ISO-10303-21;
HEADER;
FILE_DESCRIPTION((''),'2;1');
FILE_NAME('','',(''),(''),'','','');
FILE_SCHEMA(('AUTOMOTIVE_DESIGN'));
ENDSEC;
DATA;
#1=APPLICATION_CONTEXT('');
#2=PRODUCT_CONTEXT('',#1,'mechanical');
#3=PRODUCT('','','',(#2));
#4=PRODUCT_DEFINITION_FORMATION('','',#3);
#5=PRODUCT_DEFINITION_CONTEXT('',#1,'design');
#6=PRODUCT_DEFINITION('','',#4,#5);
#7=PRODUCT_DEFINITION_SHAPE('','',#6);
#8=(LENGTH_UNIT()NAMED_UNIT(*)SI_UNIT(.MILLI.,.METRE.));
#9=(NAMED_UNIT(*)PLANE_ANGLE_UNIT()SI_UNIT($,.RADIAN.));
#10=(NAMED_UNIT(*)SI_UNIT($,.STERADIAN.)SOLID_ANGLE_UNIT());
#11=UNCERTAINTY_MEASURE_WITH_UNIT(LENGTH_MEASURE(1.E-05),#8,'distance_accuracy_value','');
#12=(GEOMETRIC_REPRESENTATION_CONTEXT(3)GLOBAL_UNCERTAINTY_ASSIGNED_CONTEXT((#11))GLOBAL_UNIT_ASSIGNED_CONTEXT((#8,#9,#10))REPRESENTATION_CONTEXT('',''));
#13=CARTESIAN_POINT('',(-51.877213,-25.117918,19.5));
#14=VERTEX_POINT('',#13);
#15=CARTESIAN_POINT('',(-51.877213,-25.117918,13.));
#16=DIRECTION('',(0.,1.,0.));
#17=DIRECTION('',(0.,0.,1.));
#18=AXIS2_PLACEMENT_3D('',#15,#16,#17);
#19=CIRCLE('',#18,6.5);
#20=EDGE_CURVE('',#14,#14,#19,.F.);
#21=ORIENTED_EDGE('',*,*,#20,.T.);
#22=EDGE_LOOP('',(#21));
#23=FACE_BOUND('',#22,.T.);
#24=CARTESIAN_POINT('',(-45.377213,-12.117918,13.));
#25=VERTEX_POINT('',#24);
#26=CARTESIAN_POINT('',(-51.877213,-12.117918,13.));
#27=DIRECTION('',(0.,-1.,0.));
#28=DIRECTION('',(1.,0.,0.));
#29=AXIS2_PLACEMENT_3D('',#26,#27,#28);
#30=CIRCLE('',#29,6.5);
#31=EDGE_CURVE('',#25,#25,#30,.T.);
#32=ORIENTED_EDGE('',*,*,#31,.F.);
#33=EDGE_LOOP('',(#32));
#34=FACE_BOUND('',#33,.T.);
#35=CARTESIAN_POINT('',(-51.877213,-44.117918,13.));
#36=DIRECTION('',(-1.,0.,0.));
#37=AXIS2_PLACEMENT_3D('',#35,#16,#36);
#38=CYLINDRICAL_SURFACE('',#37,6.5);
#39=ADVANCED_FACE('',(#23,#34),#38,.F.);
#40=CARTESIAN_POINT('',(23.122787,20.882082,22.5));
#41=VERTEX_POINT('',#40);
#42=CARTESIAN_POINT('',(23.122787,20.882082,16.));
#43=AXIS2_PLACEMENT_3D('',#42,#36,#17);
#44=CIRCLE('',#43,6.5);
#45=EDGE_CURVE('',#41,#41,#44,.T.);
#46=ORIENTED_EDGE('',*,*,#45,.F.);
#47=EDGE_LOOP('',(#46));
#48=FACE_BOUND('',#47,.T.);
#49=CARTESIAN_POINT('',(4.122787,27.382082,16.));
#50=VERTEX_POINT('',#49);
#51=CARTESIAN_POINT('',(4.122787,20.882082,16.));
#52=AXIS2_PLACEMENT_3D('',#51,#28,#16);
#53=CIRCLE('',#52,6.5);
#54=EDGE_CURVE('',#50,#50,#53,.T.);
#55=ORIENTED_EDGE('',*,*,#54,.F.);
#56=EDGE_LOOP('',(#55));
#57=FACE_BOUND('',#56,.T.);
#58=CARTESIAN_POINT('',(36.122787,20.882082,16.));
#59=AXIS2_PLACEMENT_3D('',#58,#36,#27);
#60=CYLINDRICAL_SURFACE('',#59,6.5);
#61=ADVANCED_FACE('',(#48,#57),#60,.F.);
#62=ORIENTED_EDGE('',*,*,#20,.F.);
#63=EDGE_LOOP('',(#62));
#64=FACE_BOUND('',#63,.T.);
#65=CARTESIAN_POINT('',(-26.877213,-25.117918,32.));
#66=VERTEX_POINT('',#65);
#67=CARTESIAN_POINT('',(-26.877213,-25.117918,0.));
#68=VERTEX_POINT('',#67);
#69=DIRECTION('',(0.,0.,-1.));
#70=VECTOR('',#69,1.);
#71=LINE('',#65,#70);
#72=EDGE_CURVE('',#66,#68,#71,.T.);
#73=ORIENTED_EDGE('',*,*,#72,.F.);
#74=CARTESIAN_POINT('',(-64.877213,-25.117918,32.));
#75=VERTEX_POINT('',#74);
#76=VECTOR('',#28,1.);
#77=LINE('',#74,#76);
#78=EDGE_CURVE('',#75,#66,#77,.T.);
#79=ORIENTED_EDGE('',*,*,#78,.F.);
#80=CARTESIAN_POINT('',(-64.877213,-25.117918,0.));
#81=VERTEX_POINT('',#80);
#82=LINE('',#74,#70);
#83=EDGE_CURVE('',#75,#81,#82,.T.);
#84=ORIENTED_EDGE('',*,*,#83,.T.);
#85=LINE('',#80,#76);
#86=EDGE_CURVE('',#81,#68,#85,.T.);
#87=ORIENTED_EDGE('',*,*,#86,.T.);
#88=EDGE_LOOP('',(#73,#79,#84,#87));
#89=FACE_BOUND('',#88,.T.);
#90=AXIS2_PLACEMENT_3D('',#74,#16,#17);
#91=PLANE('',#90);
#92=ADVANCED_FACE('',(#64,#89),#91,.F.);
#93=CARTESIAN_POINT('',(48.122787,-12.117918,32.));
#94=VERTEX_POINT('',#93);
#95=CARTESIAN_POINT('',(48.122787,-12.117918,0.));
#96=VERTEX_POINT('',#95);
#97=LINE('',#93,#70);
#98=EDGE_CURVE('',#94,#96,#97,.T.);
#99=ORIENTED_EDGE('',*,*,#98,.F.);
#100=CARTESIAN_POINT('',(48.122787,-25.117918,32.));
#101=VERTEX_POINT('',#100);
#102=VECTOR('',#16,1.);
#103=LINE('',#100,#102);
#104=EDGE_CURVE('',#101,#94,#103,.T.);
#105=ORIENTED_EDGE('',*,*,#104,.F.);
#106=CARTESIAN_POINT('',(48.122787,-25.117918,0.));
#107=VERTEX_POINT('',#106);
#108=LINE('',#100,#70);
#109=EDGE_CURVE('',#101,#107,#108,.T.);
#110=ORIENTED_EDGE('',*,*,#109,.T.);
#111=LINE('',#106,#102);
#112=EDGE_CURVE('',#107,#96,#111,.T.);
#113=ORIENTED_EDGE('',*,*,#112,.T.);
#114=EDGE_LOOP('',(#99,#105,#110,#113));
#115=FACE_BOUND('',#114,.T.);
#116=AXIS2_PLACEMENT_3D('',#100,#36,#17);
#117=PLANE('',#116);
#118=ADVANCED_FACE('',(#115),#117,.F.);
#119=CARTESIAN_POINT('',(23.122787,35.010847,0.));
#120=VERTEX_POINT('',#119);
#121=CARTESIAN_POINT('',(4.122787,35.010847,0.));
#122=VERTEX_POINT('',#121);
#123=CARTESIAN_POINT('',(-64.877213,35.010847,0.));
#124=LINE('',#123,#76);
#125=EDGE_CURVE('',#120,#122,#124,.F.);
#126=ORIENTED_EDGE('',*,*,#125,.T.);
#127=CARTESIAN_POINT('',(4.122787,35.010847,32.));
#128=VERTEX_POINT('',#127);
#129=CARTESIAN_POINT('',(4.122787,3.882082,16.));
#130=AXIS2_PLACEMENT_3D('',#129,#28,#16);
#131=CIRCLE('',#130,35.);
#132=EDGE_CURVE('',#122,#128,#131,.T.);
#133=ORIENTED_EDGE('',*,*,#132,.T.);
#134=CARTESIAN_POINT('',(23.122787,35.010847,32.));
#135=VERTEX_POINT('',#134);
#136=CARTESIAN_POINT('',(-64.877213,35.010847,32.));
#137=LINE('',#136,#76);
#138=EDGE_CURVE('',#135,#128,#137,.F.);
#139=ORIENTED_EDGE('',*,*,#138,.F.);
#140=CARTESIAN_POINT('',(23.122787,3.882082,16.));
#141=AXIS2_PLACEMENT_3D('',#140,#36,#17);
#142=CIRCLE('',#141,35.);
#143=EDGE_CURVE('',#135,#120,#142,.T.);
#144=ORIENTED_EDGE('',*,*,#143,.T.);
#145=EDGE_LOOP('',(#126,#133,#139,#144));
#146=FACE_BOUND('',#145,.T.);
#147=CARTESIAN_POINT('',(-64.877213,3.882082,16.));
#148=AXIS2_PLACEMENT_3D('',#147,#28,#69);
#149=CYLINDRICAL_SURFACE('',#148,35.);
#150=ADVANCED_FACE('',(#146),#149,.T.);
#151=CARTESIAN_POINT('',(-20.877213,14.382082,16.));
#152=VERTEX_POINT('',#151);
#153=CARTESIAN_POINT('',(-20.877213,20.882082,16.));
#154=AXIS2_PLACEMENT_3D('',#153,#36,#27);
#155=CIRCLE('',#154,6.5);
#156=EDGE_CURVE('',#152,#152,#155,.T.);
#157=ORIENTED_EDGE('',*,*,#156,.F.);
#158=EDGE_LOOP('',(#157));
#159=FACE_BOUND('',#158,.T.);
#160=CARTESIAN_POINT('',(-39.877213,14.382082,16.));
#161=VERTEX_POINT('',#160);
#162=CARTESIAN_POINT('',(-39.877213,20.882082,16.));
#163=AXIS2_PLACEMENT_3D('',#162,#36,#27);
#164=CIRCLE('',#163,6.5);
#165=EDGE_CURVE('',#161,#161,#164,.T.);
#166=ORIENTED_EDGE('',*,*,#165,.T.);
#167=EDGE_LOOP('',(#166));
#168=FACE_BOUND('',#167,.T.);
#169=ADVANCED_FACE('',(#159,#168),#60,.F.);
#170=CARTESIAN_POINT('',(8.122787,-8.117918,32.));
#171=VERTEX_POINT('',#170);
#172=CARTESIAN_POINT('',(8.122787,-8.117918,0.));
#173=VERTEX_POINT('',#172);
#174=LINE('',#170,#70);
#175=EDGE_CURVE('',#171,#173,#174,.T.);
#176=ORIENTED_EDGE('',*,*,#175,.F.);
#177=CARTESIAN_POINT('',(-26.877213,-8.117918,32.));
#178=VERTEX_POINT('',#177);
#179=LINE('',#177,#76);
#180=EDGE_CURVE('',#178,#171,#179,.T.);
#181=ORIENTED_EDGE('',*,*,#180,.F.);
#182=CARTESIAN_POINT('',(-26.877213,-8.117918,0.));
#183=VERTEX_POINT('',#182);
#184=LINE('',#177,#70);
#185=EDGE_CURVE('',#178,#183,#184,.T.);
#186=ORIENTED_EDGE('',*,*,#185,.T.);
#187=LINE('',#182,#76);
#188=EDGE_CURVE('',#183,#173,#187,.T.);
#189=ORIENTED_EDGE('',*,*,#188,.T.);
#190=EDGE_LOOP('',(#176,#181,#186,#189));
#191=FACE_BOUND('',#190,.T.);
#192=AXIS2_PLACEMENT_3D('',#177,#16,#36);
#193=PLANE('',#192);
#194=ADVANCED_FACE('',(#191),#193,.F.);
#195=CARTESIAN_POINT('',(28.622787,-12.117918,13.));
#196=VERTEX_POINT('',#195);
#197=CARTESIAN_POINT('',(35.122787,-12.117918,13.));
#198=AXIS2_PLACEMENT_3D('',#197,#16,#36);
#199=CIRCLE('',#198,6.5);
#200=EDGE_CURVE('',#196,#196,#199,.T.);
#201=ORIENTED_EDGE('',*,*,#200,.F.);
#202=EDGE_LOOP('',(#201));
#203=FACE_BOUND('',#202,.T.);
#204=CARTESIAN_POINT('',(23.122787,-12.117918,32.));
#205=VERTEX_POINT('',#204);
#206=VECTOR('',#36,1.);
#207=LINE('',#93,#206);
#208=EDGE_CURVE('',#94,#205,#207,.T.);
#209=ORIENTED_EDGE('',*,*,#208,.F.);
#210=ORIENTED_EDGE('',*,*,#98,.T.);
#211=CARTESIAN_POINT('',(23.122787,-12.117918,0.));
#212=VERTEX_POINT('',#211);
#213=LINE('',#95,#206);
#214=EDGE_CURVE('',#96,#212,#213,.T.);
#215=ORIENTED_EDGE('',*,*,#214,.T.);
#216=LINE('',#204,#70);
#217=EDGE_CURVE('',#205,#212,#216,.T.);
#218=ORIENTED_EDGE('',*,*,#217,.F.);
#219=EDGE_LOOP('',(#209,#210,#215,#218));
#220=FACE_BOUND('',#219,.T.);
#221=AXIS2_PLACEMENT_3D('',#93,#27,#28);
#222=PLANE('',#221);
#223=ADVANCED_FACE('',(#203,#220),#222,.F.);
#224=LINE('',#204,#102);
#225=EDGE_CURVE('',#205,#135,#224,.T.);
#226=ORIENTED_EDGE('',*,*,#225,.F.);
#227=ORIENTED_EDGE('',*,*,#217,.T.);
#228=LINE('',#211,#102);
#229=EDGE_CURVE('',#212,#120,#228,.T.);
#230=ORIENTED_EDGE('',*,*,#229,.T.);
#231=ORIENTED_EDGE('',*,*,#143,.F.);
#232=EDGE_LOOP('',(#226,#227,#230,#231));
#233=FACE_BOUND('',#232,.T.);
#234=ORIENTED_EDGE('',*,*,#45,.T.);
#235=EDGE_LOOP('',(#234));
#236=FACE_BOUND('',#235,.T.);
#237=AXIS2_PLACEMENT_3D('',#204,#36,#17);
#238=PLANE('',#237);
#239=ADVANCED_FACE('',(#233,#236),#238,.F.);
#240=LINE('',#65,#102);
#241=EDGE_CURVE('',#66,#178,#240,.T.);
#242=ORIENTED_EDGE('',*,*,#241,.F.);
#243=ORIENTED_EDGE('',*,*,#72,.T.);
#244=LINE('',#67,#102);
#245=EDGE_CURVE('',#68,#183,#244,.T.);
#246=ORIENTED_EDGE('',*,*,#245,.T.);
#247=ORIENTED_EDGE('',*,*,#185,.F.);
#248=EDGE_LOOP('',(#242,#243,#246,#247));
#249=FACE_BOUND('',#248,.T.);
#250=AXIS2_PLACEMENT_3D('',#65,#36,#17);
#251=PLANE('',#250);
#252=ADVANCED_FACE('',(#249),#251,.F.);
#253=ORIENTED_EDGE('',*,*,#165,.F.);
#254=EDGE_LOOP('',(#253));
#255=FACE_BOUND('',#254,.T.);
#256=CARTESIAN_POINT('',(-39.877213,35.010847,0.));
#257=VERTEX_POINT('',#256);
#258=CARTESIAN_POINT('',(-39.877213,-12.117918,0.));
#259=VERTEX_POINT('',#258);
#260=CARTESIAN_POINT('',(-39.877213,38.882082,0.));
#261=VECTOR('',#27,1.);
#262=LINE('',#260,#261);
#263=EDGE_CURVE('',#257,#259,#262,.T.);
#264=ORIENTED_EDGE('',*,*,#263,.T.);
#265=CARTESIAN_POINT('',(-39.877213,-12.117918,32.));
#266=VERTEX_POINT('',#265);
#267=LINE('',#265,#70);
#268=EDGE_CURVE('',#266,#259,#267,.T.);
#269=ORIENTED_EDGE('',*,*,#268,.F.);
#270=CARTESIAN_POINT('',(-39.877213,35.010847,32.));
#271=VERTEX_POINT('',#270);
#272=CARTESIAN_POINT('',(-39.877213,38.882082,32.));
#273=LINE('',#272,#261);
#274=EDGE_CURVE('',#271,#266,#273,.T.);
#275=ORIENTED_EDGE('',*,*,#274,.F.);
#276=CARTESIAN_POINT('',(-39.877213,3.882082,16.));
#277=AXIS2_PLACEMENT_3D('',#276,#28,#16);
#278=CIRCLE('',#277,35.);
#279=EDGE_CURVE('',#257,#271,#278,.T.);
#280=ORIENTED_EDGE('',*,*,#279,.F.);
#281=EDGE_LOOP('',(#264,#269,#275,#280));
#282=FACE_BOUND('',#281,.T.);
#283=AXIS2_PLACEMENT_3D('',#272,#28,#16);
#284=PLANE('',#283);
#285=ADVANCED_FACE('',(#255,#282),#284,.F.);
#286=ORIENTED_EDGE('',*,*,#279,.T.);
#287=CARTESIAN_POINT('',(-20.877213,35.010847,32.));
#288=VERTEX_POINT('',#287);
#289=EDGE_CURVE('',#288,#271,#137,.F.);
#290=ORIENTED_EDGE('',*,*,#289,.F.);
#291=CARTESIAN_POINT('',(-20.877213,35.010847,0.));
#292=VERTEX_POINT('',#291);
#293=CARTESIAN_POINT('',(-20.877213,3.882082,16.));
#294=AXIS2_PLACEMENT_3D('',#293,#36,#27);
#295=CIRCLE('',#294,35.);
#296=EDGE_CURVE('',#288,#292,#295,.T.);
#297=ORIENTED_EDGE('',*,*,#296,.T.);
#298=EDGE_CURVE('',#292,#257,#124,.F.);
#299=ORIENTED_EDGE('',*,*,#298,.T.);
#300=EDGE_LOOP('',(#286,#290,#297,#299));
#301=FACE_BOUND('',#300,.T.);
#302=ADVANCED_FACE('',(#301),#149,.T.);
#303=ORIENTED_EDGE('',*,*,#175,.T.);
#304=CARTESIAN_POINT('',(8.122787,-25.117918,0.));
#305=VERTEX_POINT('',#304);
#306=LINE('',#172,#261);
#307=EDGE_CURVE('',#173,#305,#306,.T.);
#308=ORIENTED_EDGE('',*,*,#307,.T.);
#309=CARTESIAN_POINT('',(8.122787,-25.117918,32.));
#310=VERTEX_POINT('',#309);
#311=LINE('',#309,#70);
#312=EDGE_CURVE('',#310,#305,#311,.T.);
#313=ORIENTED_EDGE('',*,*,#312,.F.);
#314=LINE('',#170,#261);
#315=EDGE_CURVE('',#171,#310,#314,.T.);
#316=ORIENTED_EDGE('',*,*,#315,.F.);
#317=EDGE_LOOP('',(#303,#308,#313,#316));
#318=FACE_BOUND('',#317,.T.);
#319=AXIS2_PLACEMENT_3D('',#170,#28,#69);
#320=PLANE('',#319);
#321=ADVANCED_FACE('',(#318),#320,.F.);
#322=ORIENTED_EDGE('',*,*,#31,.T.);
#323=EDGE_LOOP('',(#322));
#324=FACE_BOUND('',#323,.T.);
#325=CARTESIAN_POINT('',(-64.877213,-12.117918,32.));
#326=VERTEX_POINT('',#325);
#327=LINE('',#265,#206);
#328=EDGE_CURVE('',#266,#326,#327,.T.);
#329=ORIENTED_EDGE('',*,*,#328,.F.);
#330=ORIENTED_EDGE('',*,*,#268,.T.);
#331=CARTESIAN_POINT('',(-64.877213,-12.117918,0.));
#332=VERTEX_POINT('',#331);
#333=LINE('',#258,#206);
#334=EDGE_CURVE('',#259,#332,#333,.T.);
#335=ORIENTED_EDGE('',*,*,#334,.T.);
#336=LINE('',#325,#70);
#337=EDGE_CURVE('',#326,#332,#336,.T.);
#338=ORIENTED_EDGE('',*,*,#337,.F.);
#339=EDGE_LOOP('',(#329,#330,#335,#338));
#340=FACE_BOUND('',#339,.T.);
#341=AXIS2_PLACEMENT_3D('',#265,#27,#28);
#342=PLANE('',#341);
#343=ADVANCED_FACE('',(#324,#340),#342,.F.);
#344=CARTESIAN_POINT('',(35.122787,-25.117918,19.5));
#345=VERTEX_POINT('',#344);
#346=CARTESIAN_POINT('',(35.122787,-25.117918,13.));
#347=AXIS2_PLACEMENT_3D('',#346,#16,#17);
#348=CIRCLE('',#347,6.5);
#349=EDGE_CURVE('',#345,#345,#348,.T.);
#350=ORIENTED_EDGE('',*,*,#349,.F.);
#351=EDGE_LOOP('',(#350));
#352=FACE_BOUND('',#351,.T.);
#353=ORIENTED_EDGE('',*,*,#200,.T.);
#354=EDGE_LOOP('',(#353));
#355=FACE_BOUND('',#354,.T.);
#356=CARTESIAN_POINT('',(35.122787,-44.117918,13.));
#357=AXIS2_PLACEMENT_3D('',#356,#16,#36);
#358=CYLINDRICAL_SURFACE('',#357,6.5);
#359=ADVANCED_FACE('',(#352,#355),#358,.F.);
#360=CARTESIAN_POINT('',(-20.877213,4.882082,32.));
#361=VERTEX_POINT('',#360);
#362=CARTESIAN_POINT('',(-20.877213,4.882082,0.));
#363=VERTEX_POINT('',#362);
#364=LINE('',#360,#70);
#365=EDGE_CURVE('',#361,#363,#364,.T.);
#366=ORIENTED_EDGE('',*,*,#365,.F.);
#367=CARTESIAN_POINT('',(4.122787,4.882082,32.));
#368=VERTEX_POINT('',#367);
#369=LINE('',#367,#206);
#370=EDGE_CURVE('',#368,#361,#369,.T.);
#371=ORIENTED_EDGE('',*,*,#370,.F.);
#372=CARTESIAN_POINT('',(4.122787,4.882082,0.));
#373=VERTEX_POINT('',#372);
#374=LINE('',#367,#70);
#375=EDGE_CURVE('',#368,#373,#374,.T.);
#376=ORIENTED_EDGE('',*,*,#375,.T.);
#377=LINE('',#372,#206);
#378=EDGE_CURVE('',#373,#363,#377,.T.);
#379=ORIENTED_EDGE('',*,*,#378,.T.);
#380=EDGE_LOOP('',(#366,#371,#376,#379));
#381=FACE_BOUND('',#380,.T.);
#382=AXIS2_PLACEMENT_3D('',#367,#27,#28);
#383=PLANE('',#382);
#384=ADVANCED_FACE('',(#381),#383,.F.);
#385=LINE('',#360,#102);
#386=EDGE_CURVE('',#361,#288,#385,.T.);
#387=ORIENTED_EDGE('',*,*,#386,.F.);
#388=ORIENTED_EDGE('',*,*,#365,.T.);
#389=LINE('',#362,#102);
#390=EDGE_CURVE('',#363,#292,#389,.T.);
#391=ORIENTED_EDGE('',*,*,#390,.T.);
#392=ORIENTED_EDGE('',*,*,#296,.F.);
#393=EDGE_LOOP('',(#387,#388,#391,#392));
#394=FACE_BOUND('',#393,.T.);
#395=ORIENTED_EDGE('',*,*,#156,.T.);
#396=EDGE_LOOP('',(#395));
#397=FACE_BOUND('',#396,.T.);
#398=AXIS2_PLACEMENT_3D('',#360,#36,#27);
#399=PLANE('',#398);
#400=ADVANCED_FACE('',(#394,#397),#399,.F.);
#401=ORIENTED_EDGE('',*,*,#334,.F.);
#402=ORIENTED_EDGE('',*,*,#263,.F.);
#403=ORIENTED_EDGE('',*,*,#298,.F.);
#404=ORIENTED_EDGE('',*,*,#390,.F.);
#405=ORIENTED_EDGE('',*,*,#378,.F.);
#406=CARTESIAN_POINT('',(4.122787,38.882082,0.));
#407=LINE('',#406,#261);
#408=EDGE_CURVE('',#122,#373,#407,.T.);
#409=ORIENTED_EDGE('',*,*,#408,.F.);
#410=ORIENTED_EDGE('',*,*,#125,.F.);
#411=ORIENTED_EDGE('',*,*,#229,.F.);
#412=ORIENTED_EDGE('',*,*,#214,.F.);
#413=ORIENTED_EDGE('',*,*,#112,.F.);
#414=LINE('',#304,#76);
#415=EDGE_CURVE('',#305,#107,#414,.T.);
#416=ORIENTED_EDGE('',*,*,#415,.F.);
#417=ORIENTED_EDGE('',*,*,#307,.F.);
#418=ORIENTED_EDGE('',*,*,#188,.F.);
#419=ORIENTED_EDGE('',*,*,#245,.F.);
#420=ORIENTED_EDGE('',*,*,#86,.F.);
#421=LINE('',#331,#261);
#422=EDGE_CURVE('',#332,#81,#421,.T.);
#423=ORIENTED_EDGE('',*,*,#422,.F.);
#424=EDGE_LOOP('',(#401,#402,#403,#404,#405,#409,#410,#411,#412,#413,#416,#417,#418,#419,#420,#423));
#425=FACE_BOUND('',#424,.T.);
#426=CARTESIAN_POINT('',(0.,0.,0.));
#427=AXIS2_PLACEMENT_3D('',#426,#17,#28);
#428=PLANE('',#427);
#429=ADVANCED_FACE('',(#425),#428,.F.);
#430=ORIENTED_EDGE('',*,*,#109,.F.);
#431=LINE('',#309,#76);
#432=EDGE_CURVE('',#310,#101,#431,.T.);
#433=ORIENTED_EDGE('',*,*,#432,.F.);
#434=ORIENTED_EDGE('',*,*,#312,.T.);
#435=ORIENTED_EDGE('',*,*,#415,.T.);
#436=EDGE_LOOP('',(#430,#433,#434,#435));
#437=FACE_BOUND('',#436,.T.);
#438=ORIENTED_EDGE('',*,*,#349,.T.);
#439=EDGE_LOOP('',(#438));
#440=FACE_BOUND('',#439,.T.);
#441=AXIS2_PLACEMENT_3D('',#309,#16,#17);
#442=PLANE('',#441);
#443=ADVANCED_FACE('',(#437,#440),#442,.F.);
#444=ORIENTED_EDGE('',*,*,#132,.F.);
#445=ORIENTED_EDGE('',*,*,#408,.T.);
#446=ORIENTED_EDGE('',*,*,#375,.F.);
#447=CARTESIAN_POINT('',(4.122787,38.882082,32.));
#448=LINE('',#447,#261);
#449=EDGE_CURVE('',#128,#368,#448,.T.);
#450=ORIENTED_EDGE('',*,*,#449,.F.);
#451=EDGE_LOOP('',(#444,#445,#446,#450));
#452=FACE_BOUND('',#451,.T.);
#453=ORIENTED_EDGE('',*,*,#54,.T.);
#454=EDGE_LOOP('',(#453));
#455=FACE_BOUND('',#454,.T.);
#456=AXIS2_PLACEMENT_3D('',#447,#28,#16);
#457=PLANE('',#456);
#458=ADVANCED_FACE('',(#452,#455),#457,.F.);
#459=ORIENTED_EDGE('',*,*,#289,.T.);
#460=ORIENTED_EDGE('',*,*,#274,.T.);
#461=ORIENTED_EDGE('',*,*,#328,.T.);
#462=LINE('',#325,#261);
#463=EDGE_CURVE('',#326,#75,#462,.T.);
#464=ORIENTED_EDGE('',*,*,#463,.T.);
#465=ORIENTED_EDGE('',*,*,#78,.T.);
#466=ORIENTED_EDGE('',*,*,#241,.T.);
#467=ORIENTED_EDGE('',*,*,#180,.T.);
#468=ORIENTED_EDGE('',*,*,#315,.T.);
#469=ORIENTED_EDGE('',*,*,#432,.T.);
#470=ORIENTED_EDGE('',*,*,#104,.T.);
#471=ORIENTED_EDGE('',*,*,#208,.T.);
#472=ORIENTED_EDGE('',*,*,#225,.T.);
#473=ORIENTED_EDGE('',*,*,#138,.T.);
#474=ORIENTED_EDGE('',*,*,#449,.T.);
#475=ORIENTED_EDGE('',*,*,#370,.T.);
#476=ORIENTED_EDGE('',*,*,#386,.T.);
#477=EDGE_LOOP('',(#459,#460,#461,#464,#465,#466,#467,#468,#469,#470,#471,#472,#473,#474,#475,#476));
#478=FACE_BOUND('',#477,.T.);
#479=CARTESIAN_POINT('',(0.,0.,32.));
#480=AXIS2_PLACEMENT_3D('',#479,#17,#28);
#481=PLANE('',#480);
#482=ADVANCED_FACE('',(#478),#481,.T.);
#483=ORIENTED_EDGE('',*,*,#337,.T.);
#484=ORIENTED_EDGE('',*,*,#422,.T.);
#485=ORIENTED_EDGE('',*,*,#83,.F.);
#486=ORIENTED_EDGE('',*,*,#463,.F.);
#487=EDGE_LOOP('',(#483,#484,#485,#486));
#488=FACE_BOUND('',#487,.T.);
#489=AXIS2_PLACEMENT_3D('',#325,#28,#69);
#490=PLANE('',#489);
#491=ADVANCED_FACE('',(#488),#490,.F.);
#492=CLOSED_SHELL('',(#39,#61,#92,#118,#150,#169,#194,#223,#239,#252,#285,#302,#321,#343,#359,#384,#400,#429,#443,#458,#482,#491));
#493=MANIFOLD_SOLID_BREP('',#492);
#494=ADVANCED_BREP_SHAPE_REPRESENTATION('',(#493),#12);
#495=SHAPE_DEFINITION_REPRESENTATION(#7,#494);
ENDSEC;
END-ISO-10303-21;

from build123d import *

# Parameters (mm, degrees)
BOSS_EXTRUDE1_DEPTH = 32
SKETCH2_R           = 6.5
CUT_EXTRUDE1_DEPTH  = 32
SKETCH3_R           = 6.5
CUT_EXTRUDE2_DEPTH  = 76
CUT_EXTRUDE5_START  = -63
CUT_EXTRUDE5_DEPTH  = 63


# Read off the part's stored shape, not the designer's step: Cut-Extrude5
with BuildPart() as part:
    # Sketch1 → Boss-Extrude1 (new body)
    with BuildSketch(Plane.XY):
        Polygon((-64.877213136, -12.117917581), (-64.877213136, -25.117917581), (-26.877213136, -25.117917581), (-26.877213136, -8.117917581), (8.122786864, -8.117917581), (8.122786864, -25.117917581), (48.122786864, -25.117917581), (48.122786864, -12.117917581), (23.122786864, -12.117917581), (23.122786864, 38.882082419), (4.122786864, 38.882082419), (4.122786864, 4.882082419), (-20.877213136, 4.882082419), (-20.877213136, 38.882082419), (-39.877213136, 38.882082419), (-39.877213136, -12.117917581), align=None)
    extrude(amount=BOSS_EXTRUDE1_DEPTH)

    # Sketch2 → Cut-Extrude1 (cut)
    with BuildSketch(Plane(origin=(0, -12.117917581, 0), x_dir=(1, 0, 0), z_dir=(0, 1, 0))):
        with Locations(Location((35.122786864, -13, 0), (0, 0, 180))):
            Circle(SKETCH2_R)
        with Locations(Location((-51.877213136, -13, 0), (0, 0, 270))):
            Circle(SKETCH2_R)
    extrude(amount=-CUT_EXTRUDE1_DEPTH, mode=Mode.SUBTRACT)

    # Sketch3 → Cut-Extrude2 (cut)
    with BuildSketch(Plane.ZY.offset(39.877213136)):
        with Locations(Location((16, 20.882082419, 0), (0, 0, 270))):
            Circle(SKETCH3_R)
    extrude(amount=-CUT_EXTRUDE2_DEPTH, mode=Mode.SUBTRACT)

    # Cut-Extrude5 outline → Cut-Extrude5 (cut)
    with BuildSketch(Plane(origin=(23.122786864, 0, 0), x_dir=(0, 0, -1), z_dir=(1, 0, 0)).offset(CUT_EXTRUDE5_START)):
        with BuildLine():
            ThreePointArc((-32, 35.010847251), (-24.230833216, 37.900509551), (-16, 38.882082419))
            Line((-16, 38.882082419), (-32, 38.882082419))
            Line((-32, 38.882082419), (-32, 35.010847251))
        make_face()
        with BuildLine():
            ThreePointArc((-16, 38.882082419), (-7.769166784, 37.900509551), (0, 35.010847251))
            Line((0, 35.010847251), (0, 38.882082419))
            Line((0, 38.882082419), (-16, 38.882082419))
        make_face()
    extrude(amount=CUT_EXTRUDE5_DEPTH, mode=Mode.SUBTRACT)


solid = part.part
